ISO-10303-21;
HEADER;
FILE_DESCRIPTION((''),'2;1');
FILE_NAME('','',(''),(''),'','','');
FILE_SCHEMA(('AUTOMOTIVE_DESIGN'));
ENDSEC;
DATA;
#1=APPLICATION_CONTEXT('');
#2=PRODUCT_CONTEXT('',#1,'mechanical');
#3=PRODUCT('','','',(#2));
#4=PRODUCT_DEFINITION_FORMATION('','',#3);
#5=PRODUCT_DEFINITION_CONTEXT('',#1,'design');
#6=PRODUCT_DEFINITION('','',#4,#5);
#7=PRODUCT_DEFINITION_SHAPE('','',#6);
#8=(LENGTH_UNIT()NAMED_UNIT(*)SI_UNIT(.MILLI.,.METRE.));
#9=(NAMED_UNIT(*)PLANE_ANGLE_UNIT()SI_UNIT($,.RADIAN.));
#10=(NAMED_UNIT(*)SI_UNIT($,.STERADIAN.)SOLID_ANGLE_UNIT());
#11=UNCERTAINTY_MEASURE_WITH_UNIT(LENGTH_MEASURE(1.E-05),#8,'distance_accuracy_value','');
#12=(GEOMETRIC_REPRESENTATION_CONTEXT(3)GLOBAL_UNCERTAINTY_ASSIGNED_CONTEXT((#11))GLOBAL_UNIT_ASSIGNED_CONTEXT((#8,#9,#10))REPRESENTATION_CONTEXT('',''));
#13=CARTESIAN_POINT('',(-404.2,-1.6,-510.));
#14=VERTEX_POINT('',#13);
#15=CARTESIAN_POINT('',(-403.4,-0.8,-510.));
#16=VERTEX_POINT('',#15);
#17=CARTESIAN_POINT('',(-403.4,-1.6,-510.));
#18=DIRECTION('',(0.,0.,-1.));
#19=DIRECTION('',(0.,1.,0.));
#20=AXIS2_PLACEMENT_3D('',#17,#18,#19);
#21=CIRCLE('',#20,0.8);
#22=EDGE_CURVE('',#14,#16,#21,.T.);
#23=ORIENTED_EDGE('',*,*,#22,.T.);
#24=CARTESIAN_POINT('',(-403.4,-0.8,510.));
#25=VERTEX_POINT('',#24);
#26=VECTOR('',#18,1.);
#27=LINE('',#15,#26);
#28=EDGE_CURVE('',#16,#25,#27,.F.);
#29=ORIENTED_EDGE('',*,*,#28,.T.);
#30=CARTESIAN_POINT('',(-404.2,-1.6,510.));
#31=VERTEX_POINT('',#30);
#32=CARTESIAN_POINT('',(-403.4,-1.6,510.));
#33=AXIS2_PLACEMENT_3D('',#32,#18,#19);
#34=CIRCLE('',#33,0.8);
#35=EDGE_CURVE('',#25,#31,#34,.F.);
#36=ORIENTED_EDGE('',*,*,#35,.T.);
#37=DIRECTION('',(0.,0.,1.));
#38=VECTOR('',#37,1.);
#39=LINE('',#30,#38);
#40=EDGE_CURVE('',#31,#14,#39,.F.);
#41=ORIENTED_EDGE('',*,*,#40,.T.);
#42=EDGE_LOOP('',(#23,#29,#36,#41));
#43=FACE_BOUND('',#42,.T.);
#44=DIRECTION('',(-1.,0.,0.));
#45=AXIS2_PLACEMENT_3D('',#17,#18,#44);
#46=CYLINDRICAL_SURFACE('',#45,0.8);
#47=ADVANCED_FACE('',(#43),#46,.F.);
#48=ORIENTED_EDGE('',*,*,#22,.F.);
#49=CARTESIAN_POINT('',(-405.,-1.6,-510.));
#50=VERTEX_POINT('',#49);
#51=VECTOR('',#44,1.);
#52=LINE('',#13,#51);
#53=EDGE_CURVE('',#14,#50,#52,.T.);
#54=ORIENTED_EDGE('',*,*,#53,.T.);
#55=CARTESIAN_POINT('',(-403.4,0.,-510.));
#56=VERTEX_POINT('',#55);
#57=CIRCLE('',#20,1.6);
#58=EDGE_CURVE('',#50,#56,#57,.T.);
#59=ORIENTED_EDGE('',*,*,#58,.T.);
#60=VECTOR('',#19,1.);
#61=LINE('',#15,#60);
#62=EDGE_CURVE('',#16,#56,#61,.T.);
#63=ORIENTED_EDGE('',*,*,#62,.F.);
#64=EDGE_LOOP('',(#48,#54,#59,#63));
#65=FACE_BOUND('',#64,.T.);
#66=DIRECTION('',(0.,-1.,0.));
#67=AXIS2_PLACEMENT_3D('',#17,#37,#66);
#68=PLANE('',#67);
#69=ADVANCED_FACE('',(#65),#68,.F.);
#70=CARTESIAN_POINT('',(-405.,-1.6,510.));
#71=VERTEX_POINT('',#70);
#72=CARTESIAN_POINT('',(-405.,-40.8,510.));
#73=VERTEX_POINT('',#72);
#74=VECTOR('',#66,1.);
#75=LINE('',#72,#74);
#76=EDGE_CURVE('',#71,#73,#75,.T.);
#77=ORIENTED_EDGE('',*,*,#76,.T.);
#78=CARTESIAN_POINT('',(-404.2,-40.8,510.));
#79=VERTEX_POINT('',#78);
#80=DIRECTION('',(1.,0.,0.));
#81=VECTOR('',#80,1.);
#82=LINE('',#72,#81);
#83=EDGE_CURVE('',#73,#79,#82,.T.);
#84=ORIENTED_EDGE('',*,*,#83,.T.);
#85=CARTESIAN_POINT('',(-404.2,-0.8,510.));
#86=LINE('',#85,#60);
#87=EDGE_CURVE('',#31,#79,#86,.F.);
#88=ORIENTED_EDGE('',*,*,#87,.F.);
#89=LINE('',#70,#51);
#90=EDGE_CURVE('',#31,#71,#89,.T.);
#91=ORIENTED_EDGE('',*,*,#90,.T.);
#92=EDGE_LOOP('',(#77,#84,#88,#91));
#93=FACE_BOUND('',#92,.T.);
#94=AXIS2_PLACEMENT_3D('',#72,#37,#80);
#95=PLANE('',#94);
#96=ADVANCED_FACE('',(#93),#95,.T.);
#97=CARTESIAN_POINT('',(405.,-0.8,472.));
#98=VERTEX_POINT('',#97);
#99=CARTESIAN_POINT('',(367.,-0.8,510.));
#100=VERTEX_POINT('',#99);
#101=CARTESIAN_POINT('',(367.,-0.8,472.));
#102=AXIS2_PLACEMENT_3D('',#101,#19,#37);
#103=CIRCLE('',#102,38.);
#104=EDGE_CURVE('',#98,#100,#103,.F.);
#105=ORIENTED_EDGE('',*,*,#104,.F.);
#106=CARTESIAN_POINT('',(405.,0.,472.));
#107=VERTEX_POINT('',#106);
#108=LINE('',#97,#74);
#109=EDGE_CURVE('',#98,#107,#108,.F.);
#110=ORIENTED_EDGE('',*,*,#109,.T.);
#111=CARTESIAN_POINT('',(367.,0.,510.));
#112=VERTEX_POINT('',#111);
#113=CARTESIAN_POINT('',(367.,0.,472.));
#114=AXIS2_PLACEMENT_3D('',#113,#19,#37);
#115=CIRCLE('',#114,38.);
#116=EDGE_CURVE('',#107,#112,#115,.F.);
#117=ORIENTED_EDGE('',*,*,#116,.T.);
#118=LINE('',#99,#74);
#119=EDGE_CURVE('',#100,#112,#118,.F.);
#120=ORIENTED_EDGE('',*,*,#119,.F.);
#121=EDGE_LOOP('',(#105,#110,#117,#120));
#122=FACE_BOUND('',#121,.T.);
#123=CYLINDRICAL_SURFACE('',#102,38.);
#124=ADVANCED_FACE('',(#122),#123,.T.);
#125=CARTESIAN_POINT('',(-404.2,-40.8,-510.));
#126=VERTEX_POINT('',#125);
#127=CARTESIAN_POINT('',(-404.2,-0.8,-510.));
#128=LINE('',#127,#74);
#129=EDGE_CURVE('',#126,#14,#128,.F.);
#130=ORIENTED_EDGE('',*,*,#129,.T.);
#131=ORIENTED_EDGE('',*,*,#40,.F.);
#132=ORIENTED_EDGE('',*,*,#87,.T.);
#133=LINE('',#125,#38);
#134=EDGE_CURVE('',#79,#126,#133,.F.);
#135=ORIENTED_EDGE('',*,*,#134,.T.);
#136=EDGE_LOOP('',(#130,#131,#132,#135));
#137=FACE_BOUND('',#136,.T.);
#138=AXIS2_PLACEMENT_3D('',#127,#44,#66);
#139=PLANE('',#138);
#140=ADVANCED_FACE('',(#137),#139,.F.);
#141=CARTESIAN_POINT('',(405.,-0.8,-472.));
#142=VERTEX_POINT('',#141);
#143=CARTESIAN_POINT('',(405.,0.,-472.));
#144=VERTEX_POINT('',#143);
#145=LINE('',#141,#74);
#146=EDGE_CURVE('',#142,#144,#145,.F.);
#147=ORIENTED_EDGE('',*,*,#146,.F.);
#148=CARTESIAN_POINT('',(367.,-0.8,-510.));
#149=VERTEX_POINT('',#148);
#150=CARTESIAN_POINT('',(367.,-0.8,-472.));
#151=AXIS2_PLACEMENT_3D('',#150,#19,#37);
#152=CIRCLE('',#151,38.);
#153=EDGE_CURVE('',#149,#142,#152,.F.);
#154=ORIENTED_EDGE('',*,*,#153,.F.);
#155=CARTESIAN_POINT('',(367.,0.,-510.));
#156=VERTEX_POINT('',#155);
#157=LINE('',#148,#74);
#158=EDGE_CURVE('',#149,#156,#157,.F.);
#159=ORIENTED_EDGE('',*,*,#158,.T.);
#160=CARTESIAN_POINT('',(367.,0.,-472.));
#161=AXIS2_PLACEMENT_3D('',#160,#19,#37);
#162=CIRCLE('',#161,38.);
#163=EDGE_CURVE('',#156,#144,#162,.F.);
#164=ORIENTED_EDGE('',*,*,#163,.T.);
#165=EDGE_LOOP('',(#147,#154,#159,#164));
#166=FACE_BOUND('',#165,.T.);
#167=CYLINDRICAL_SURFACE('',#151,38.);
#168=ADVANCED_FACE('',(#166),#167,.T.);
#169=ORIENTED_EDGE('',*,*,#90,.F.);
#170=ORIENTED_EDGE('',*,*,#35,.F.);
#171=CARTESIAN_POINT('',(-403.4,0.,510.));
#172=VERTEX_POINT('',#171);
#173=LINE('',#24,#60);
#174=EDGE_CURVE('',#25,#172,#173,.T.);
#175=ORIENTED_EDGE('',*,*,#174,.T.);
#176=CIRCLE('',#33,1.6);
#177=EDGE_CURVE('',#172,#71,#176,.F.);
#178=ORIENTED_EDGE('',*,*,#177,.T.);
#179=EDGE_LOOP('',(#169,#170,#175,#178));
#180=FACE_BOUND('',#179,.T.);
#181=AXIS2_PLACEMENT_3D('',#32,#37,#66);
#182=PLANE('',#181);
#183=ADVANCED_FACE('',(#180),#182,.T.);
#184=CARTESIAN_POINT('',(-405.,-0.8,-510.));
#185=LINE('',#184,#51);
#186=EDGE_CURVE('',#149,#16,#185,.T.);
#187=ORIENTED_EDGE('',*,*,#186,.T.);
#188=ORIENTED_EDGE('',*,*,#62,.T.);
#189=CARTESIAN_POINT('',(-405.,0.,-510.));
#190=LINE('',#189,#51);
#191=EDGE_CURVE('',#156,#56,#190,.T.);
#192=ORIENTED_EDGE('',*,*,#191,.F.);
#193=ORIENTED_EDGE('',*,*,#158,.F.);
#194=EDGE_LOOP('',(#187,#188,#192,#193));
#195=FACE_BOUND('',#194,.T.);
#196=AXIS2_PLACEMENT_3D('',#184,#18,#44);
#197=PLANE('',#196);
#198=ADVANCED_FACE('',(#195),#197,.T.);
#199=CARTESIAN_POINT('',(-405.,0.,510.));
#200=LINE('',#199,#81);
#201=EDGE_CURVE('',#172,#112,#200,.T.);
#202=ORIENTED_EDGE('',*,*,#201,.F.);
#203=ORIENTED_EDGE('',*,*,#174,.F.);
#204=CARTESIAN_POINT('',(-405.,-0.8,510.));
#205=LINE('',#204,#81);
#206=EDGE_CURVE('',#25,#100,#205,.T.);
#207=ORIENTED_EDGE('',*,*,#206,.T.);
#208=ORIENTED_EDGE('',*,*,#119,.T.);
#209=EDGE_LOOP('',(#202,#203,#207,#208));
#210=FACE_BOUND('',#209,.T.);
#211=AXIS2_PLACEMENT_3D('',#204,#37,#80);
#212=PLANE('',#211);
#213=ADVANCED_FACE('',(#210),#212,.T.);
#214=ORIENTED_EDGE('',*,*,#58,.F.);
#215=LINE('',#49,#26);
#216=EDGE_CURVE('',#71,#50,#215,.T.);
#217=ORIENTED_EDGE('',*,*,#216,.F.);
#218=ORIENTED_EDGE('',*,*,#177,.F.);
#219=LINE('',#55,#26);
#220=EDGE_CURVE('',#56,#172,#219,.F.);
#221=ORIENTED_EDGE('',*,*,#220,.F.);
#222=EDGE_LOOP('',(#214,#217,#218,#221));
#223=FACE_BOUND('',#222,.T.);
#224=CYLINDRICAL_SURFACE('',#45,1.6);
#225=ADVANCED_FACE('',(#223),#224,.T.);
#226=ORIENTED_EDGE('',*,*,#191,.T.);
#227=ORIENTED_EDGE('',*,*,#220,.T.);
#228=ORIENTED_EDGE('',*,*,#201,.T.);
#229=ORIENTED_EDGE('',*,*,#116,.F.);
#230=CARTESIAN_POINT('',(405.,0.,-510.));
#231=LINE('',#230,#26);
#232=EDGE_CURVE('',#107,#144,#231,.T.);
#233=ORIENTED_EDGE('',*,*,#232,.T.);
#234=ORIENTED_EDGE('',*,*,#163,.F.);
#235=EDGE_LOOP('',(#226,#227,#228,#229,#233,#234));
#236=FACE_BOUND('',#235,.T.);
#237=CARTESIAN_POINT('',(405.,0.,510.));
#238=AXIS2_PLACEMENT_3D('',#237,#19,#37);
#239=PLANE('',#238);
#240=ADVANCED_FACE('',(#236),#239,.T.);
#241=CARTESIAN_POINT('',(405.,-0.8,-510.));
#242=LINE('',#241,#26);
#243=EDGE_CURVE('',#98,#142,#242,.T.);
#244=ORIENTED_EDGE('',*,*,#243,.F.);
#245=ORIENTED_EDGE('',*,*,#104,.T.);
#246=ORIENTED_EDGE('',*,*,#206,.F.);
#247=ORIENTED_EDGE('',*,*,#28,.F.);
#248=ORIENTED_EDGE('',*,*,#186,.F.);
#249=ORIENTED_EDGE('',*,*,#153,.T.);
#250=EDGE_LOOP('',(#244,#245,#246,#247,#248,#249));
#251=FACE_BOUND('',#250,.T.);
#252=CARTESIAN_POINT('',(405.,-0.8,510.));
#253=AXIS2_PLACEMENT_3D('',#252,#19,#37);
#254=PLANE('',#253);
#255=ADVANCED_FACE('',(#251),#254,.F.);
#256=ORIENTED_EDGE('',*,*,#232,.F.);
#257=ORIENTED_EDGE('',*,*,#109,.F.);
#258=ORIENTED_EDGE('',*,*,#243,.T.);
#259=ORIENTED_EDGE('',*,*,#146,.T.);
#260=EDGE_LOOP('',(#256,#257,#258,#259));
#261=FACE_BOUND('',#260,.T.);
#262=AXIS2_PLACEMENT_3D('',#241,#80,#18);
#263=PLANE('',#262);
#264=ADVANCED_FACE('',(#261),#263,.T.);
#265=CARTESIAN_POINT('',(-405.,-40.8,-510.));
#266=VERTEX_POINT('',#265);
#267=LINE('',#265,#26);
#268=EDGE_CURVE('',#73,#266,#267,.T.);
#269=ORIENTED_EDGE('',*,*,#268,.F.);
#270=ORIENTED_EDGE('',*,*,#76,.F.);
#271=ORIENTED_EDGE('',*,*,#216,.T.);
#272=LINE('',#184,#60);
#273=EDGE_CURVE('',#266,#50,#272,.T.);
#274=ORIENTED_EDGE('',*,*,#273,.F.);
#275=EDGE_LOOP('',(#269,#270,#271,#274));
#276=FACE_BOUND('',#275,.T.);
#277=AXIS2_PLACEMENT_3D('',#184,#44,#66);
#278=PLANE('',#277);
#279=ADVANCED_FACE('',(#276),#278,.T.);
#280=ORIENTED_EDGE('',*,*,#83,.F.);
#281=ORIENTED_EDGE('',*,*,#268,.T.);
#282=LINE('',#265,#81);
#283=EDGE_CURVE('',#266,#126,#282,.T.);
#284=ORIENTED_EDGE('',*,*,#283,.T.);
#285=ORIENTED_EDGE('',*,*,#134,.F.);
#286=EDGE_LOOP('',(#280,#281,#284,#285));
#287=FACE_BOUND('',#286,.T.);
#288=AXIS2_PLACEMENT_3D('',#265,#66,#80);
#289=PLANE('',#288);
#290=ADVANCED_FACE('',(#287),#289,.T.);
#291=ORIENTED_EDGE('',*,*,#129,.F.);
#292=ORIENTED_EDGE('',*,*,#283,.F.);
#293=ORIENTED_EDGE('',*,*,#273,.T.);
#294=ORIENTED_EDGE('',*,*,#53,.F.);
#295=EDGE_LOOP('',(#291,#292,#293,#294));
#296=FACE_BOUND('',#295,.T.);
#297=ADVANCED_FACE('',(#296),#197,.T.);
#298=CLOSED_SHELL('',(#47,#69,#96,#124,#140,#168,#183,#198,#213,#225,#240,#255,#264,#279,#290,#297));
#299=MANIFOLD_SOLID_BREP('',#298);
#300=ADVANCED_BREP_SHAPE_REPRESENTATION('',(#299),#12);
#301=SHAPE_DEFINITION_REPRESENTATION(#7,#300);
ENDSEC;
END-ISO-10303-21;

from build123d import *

# Parameters (mm, degrees)
SKETCH1_W                    = 810
SKETCH1_H                    = 1020
BASE_FLANGE1_DEPTH           = 0.8
EDGE_FLANGE1_STRIP_W         = 4.8
EDGE_FLANGE1_STRIP_H         = 0.8
EDGE_FLANGE1_STRIP_CUT_DEPTH = 1020
EDGE_FLANGE1_DEPTH           = 1020
CUT_EXTRUDE2_DEPTH           = 10


# Sheet-metal steps are written as plain solids
with BuildPart() as part:
    # Sketch1 → Base-Flange1 (new body)
    with BuildSketch(Plane(origin=(0, 0, 0), x_dir=(1, 0, 0), z_dir=(0, 1, 0))):
        Rectangle(SKETCH1_W, SKETCH1_H)
    extrude(amount=-BASE_FLANGE1_DEPTH)

    # Edge-Flange1 strip (across the edge) → Edge-Flange1 strip cut (cut)
    with BuildSketch(Plane(origin=(-405, -0.8, 510), x_dir=(1, 0, 0), z_dir=(0, 0, -1))):
        with Locations((-0.8, -0.4)):
            Rectangle(EDGE_FLANGE1_STRIP_W, EDGE_FLANGE1_STRIP_H)
    extrude(amount=EDGE_FLANGE1_STRIP_CUT_DEPTH, mode=Mode.SUBTRACT)

    # Edge-Flange1 section (across the edge) → Edge-Flange1 (add)
    with BuildSketch(Plane(origin=(-405, -0.8, 510), x_dir=(1, 0, 0), z_dir=(0, 0, -1))):
        with BuildLine():
            Line((0, 0.8), (0, 40))
            Line((0, 40), (0.8, 40))
            Line((0.8, 40), (0.8, 0.8))
            ThreePointArc((0.8, 0.8), (1.034314575, 0.234314575), (1.6, 0))
            Line((1.6, 0), (1.6, -0.8))
            ThreePointArc((1.6, -0.8), (0.46862915, -0.33137085), (0, 0.8))
        make_face()
    extrude(amount=EDGE_FLANGE1_DEPTH)

    # Sketch7 → Cut-Extrude2 (cut)
    with BuildSketch(Plane(origin=(0, 0, 0), x_dir=(1, 0, 0), z_dir=(0, 1, 0))):
        with BuildLine():
            Line((405, 510), (367, 510))
            ThreePointArc((367, 510), (393.870057685, 498.870057685), (405, 472))
            Line((405, 472), (405, 510))
        make_face()
        with BuildLine():
            Line((405, -510), (367, -510))
            ThreePointArc((367, -510), (393.870057685, -498.870057685), (405, -472))
            Line((405, -472), (405, -510))
        make_face()
    extrude(amount=-CUT_EXTRUDE2_DEPTH, mode=Mode.SUBTRACT)


solid = part.part
